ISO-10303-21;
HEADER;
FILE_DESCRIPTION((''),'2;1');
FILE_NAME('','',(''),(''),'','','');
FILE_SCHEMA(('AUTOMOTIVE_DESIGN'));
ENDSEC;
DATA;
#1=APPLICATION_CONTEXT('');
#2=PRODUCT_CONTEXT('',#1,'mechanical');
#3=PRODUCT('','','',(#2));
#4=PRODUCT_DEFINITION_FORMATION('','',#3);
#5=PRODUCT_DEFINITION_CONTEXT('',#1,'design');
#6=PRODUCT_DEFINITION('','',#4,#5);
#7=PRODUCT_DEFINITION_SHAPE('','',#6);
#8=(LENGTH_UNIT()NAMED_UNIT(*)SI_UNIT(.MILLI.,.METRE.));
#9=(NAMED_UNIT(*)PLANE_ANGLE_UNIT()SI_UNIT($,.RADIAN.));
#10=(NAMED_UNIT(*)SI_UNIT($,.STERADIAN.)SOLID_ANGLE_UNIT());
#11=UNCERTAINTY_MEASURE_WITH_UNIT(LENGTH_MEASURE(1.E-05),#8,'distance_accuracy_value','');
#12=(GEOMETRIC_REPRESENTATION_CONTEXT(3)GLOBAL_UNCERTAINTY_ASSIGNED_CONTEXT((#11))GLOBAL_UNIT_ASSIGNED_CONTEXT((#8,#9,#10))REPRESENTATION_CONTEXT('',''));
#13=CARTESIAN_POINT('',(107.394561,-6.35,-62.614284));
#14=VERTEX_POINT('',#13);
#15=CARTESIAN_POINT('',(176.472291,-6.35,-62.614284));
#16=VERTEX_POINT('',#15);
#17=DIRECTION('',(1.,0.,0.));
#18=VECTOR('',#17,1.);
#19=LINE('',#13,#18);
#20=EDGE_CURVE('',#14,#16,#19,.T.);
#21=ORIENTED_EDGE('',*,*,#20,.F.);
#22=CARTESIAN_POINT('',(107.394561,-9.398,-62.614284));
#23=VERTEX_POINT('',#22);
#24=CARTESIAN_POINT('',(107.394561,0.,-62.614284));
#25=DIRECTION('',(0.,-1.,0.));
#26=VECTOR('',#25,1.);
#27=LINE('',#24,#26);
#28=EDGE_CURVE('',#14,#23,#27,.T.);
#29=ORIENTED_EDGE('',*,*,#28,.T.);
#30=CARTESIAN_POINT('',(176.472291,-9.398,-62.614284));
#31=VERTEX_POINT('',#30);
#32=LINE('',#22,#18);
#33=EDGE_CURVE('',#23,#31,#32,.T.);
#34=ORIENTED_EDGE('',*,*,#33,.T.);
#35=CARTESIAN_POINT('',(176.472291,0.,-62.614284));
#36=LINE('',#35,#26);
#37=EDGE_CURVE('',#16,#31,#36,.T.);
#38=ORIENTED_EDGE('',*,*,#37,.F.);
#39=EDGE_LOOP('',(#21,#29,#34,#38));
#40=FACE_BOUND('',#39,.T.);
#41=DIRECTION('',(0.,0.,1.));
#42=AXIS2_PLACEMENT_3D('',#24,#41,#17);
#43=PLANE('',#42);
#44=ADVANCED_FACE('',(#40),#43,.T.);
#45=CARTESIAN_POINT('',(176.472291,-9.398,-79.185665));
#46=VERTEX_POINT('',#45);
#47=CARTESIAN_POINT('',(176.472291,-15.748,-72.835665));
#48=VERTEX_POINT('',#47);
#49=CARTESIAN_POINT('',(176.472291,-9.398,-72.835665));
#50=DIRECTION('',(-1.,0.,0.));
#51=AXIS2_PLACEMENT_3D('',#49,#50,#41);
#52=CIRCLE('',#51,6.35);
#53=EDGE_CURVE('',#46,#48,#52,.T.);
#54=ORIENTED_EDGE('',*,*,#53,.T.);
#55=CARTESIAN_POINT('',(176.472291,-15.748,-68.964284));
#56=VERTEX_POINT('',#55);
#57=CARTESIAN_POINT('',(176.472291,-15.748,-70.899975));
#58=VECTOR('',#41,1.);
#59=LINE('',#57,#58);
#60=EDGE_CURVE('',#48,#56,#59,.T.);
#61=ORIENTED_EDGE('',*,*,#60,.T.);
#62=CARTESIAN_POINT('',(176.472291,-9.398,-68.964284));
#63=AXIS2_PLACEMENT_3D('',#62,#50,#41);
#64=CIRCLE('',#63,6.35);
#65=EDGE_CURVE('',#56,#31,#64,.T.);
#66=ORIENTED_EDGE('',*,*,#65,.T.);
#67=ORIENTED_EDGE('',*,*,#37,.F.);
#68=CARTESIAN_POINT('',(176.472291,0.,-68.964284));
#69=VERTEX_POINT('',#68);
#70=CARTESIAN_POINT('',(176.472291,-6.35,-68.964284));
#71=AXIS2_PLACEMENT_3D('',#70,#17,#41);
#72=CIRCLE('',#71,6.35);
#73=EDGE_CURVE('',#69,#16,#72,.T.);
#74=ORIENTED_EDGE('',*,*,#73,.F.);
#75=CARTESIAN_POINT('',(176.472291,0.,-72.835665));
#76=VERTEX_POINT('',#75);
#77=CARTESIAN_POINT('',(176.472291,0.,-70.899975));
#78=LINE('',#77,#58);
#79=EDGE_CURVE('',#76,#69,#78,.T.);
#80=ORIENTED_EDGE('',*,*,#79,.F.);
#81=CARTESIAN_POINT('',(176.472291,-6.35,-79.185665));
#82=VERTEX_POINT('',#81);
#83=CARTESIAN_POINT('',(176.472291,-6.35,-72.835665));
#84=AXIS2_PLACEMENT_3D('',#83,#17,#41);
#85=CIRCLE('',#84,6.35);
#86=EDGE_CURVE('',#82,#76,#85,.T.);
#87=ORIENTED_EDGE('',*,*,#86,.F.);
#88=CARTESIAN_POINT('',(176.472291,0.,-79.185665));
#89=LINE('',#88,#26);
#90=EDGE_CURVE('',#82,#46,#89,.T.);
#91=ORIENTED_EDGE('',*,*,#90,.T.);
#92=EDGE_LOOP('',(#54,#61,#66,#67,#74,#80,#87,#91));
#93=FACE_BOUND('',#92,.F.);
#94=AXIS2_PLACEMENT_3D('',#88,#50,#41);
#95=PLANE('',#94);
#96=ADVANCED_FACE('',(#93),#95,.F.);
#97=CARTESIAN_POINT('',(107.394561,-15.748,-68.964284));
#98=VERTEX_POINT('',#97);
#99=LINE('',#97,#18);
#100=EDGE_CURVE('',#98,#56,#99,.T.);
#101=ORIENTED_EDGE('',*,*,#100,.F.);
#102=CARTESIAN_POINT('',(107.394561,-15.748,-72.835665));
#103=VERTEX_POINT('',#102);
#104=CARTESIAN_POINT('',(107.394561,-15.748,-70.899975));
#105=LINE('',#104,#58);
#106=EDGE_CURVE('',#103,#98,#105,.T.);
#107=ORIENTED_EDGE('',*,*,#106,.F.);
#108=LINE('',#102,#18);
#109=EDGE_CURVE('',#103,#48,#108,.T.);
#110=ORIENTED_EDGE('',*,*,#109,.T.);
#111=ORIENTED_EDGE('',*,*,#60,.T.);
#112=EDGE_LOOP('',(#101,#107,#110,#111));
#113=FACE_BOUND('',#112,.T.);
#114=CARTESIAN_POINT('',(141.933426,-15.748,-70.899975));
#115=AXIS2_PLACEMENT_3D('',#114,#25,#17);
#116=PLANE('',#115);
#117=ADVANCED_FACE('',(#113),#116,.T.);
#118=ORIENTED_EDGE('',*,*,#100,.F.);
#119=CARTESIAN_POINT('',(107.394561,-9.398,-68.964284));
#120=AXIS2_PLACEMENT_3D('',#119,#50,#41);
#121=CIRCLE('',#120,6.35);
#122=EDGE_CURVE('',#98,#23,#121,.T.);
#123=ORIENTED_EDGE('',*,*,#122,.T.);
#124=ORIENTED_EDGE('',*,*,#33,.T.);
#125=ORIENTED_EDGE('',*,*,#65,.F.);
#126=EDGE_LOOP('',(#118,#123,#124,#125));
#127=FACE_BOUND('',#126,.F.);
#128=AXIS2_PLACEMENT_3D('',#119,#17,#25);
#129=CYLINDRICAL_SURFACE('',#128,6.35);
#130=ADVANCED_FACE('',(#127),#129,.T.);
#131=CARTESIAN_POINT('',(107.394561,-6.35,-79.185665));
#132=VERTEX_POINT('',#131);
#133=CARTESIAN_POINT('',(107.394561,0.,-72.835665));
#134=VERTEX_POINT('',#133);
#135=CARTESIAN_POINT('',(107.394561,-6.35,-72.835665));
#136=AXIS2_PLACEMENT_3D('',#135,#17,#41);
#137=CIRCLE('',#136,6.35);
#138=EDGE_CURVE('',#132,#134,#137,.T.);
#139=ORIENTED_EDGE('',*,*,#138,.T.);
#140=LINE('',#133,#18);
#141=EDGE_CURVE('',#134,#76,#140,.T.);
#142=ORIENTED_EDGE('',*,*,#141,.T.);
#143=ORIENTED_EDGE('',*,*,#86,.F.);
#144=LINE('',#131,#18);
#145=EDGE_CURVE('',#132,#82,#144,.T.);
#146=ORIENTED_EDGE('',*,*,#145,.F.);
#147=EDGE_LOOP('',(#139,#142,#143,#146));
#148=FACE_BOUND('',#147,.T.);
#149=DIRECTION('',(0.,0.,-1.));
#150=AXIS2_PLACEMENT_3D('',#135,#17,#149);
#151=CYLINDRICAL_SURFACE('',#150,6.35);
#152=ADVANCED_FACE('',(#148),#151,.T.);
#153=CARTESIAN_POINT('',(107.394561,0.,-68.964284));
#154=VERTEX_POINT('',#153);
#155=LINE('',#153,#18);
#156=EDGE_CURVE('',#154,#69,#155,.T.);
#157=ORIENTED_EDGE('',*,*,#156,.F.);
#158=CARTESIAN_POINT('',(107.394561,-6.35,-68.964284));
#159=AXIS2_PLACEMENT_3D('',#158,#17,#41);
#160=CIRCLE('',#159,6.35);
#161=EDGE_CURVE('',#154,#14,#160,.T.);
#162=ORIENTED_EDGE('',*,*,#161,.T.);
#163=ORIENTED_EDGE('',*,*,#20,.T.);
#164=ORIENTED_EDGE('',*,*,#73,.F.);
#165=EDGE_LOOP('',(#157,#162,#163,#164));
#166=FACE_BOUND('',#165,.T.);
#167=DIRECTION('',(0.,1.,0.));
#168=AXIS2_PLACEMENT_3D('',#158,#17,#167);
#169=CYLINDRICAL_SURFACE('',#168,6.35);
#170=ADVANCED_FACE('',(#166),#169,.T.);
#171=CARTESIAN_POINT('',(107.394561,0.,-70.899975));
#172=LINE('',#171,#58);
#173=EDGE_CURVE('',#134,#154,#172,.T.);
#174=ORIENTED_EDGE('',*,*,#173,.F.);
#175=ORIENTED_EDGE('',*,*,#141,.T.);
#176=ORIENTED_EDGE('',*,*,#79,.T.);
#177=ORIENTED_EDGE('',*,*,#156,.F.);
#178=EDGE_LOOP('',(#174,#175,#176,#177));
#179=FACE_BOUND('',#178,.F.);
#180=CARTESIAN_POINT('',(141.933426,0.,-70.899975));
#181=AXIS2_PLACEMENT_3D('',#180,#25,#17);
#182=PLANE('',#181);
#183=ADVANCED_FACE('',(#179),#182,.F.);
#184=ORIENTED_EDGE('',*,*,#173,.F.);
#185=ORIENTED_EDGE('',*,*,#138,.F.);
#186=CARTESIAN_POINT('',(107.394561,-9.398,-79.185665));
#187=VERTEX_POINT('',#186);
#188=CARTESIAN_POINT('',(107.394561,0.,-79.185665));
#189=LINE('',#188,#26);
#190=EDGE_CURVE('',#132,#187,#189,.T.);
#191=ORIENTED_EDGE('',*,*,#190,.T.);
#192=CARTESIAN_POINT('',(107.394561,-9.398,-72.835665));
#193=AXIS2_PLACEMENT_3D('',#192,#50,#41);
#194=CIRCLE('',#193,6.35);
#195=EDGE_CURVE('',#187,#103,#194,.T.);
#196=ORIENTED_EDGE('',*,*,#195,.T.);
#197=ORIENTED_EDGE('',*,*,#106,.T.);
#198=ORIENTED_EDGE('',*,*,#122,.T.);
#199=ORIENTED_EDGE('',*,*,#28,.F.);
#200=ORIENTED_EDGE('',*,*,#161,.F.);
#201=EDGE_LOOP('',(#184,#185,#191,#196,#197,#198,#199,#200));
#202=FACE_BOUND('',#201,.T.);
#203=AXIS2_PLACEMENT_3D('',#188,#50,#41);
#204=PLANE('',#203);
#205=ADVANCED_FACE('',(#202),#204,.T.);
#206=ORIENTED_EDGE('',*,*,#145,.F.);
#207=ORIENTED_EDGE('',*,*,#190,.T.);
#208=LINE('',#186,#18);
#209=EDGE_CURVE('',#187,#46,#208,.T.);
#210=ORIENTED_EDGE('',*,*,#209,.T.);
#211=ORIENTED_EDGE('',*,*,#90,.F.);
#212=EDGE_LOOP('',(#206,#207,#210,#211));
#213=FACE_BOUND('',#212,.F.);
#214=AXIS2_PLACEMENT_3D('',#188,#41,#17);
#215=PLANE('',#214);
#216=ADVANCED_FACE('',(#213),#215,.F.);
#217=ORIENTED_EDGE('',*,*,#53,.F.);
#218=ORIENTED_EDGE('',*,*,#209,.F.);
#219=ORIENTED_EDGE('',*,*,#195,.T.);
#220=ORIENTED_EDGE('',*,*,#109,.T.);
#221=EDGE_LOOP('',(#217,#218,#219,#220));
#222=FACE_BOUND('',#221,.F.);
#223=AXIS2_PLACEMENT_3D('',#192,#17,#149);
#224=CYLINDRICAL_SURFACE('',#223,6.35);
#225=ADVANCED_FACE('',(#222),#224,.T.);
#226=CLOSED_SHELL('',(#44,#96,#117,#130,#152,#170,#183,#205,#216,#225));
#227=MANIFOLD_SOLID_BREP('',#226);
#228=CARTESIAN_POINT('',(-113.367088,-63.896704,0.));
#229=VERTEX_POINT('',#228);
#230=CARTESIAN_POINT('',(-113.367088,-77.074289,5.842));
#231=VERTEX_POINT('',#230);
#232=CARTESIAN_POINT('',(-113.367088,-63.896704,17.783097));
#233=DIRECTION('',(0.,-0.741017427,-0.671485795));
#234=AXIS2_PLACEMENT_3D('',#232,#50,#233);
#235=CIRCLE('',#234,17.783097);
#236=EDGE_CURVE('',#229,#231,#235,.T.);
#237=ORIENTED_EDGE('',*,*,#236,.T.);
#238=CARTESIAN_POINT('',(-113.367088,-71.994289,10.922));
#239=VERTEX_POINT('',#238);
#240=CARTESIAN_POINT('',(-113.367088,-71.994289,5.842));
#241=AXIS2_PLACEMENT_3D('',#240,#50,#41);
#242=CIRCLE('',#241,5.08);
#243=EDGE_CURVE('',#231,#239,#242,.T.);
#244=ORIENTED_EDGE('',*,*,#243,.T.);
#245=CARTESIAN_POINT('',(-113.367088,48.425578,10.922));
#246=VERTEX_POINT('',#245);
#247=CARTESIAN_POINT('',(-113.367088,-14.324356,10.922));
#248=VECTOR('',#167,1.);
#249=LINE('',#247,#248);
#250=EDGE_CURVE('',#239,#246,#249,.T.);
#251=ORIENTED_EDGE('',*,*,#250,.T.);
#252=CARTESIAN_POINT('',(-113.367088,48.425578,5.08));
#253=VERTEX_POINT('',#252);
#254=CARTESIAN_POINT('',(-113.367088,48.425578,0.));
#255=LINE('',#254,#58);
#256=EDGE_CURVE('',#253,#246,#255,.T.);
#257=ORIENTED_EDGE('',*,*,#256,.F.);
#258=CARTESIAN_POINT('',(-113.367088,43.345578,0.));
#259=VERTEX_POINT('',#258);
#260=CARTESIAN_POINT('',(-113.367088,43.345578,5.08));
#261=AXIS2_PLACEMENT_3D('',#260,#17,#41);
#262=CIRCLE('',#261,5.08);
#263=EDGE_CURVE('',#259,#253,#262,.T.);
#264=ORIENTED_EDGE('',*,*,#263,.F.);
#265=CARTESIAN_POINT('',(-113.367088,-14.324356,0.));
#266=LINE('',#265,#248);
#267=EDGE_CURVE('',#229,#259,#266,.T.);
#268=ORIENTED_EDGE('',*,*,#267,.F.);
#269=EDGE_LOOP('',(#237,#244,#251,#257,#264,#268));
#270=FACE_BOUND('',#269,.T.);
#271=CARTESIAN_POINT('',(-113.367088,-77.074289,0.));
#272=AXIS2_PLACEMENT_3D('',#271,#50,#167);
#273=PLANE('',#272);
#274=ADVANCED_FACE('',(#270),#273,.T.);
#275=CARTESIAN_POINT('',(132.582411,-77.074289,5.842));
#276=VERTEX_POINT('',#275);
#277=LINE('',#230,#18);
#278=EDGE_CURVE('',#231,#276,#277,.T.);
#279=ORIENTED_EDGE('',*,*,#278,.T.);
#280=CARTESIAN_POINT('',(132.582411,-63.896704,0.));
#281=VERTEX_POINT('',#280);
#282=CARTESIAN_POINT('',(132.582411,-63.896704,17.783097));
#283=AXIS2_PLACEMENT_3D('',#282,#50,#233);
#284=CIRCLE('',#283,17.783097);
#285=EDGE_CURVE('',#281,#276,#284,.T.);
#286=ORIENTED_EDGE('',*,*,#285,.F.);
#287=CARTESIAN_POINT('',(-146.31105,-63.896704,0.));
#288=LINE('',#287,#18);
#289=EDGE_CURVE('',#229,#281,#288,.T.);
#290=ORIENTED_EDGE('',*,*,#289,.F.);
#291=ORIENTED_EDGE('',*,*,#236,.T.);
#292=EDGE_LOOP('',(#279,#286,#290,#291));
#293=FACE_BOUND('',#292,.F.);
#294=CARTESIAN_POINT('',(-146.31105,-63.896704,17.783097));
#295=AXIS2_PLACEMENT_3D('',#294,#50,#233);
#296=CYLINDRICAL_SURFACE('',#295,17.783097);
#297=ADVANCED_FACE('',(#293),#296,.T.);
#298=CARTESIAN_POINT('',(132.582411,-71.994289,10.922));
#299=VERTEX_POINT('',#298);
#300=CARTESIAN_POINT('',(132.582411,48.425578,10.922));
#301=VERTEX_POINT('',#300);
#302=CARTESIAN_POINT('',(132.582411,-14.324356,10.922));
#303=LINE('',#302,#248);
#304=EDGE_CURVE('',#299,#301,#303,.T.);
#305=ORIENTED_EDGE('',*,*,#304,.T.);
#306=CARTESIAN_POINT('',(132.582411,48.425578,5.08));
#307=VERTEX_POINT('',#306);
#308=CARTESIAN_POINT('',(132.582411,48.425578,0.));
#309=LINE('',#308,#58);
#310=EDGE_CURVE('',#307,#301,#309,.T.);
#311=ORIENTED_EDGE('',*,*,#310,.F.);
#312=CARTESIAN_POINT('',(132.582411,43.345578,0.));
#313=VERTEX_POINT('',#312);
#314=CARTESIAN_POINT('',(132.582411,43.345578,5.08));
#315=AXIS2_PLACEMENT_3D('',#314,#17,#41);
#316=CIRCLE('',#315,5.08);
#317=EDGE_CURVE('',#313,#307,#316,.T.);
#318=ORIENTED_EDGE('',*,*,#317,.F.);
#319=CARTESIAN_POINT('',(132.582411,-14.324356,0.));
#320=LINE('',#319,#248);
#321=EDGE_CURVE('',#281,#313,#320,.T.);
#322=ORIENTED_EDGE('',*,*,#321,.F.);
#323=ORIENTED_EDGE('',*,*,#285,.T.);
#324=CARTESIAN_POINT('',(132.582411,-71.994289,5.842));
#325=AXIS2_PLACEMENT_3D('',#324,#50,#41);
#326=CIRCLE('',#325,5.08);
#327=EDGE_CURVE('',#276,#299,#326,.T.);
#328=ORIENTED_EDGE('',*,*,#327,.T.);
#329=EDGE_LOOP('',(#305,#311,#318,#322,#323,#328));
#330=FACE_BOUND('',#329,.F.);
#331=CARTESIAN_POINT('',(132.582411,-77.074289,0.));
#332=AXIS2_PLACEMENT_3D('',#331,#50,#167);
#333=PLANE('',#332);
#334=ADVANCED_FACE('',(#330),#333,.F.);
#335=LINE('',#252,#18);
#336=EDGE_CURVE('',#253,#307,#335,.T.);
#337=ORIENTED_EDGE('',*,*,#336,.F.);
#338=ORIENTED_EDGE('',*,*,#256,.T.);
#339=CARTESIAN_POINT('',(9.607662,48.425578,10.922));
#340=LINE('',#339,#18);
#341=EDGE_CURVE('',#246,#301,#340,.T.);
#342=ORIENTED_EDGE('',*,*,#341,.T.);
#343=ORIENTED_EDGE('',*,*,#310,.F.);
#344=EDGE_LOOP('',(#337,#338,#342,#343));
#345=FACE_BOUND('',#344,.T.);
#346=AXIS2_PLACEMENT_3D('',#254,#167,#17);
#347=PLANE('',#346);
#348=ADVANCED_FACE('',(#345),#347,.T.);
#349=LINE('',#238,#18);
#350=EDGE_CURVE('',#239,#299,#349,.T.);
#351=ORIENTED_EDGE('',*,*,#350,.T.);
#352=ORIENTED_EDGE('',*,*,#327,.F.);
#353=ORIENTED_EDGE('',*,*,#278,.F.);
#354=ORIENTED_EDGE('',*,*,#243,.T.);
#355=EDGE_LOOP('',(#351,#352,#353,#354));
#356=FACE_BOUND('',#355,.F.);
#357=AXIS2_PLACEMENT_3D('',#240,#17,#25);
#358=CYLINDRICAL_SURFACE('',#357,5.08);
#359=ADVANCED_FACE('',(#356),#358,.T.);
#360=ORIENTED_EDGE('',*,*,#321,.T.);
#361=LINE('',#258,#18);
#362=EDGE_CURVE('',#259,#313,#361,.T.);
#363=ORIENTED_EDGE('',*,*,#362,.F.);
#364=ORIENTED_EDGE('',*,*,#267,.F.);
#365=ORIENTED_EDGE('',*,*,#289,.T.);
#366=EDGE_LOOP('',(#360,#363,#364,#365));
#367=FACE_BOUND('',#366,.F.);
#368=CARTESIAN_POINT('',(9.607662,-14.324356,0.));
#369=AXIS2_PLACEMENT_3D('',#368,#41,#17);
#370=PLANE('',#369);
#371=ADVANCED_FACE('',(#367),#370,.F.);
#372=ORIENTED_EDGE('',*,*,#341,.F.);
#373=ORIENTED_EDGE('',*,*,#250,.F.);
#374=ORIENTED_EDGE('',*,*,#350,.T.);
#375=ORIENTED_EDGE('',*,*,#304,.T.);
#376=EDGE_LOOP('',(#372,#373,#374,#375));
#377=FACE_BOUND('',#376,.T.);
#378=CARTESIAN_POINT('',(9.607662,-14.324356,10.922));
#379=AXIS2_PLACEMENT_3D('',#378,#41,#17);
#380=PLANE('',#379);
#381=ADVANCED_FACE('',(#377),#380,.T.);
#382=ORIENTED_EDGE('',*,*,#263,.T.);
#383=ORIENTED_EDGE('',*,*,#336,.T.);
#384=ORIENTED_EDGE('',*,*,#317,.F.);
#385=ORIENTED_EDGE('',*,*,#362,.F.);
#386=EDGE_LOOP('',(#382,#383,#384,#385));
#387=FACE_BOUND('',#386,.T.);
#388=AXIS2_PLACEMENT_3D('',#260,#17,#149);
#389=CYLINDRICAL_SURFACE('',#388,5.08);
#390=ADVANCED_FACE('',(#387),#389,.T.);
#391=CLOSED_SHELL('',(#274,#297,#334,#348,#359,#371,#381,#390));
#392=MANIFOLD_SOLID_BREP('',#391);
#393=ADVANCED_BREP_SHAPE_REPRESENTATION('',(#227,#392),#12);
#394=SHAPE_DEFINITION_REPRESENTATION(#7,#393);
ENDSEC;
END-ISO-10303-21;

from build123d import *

# Parameters (mm, degrees)
F0_W        = 245.9494993091
F0_H        = 125.4998669028
F1_DEPTH    = 10.922
F2_R        = 5.08
F3_T1_DEPTH = 311.8374235671
F4_R        = 5.08
F5_W        = 69.0777301788
F5_H        = 16.571380198
F6_DEPTH    = 15.748
F7_R        = 6.35
F8_R        = 6.35
F9_R        = 6.35
F10_R       = 6.35


# Not quite as in the source:
# - a fillet or chamfer that OpenCascade refuses, or shapes differently, is made with other operations: its cross-section is extruded or revolved along the edge and cut away or added


with BuildPart() as f1:
    # F0 (on Top) → F1 (new body)
    with BuildSketch(Plane.XY):
        with Locations((9.6076615155, -14.3243558705)):
            Rectangle(F0_W, F0_H)
    extrude(amount=F1_DEPTH)

    # F2
    f2_edges = [f1.edges().sort_by_distance(p)[0] for p in [
        (9.607662, -77.074289, 10.922),
    ]]
    fillet(f2_edges, radius=F2_R)

    # F3: fillet of radius 17.7830971004 on 1 edges, made by hand

    # F3_s2 → F3_t1 (cut)
    with BuildSketch(Plane.YZ.offset(-146.3110502681)):
        with BuildLine():
            ThreePointArc((-77.0742893219, 5.842), (-71.1039526713, 1.5259720209), (-63.8967044703, 0))
            Line((-63.8967044703, 0), (-63.8967044703, -0.355661942))
            Line((-63.8967044703, -0.355661942), (-77.0742893219, -0.355661942))
            Line((-77.0742893219, -0.355661942), (-77.4299512639, 0))
            ThreePointArc((-77.4299512639, 0), (-77.4299512639, 2.921), (-77.3378410189, 5.603178058))
            Line((-77.3378410189, 5.603178058), (-77.0742893219, 5.842))
        make_face()
    extrude(amount=F3_T1_DEPTH, mode=Mode.SUBTRACT)

    # F4
    f4_edges = [f1.edges().sort_by_distance(p)[0] for p in [
        (9.607662, 48.425578, 0),
    ]]
    fillet(f4_edges, radius=F4_R)


with BuildPart() as f6:
    # F5 (on Front) → F6 (new body)
    with BuildSketch(Plane.XZ):
        with Locations((141.9334262609, -70.8999745548)):
            Rectangle(F5_W, F5_H)
    extrude(amount=F6_DEPTH)

    # F7
    f7_edges = [f6.edges().sort_by_distance(p)[0] for p in [
        (141.933426, 0, -79.185665),
    ]]
    fillet(f7_edges, radius=F7_R)

    # F8
    f8_edges = [f6.edges().sort_by_distance(p)[0] for p in [
        (141.933426, 0, -62.614284),
    ]]
    fillet(f8_edges, radius=F8_R)

    # F9
    f9_edges = [f6.edges().sort_by_distance(p)[0] for p in [
        (141.933426, -15.748, -79.185665),
    ]]
    fillet(f9_edges, radius=F9_R)

    # F10
    f10_edges = [f6.edges().sort_by_distance(p)[0] for p in [
        (141.933426, -15.748, -62.614284),
    ]]
    fillet(f10_edges, radius=F10_R)


solid = Compound([f1.part, f6.part])
